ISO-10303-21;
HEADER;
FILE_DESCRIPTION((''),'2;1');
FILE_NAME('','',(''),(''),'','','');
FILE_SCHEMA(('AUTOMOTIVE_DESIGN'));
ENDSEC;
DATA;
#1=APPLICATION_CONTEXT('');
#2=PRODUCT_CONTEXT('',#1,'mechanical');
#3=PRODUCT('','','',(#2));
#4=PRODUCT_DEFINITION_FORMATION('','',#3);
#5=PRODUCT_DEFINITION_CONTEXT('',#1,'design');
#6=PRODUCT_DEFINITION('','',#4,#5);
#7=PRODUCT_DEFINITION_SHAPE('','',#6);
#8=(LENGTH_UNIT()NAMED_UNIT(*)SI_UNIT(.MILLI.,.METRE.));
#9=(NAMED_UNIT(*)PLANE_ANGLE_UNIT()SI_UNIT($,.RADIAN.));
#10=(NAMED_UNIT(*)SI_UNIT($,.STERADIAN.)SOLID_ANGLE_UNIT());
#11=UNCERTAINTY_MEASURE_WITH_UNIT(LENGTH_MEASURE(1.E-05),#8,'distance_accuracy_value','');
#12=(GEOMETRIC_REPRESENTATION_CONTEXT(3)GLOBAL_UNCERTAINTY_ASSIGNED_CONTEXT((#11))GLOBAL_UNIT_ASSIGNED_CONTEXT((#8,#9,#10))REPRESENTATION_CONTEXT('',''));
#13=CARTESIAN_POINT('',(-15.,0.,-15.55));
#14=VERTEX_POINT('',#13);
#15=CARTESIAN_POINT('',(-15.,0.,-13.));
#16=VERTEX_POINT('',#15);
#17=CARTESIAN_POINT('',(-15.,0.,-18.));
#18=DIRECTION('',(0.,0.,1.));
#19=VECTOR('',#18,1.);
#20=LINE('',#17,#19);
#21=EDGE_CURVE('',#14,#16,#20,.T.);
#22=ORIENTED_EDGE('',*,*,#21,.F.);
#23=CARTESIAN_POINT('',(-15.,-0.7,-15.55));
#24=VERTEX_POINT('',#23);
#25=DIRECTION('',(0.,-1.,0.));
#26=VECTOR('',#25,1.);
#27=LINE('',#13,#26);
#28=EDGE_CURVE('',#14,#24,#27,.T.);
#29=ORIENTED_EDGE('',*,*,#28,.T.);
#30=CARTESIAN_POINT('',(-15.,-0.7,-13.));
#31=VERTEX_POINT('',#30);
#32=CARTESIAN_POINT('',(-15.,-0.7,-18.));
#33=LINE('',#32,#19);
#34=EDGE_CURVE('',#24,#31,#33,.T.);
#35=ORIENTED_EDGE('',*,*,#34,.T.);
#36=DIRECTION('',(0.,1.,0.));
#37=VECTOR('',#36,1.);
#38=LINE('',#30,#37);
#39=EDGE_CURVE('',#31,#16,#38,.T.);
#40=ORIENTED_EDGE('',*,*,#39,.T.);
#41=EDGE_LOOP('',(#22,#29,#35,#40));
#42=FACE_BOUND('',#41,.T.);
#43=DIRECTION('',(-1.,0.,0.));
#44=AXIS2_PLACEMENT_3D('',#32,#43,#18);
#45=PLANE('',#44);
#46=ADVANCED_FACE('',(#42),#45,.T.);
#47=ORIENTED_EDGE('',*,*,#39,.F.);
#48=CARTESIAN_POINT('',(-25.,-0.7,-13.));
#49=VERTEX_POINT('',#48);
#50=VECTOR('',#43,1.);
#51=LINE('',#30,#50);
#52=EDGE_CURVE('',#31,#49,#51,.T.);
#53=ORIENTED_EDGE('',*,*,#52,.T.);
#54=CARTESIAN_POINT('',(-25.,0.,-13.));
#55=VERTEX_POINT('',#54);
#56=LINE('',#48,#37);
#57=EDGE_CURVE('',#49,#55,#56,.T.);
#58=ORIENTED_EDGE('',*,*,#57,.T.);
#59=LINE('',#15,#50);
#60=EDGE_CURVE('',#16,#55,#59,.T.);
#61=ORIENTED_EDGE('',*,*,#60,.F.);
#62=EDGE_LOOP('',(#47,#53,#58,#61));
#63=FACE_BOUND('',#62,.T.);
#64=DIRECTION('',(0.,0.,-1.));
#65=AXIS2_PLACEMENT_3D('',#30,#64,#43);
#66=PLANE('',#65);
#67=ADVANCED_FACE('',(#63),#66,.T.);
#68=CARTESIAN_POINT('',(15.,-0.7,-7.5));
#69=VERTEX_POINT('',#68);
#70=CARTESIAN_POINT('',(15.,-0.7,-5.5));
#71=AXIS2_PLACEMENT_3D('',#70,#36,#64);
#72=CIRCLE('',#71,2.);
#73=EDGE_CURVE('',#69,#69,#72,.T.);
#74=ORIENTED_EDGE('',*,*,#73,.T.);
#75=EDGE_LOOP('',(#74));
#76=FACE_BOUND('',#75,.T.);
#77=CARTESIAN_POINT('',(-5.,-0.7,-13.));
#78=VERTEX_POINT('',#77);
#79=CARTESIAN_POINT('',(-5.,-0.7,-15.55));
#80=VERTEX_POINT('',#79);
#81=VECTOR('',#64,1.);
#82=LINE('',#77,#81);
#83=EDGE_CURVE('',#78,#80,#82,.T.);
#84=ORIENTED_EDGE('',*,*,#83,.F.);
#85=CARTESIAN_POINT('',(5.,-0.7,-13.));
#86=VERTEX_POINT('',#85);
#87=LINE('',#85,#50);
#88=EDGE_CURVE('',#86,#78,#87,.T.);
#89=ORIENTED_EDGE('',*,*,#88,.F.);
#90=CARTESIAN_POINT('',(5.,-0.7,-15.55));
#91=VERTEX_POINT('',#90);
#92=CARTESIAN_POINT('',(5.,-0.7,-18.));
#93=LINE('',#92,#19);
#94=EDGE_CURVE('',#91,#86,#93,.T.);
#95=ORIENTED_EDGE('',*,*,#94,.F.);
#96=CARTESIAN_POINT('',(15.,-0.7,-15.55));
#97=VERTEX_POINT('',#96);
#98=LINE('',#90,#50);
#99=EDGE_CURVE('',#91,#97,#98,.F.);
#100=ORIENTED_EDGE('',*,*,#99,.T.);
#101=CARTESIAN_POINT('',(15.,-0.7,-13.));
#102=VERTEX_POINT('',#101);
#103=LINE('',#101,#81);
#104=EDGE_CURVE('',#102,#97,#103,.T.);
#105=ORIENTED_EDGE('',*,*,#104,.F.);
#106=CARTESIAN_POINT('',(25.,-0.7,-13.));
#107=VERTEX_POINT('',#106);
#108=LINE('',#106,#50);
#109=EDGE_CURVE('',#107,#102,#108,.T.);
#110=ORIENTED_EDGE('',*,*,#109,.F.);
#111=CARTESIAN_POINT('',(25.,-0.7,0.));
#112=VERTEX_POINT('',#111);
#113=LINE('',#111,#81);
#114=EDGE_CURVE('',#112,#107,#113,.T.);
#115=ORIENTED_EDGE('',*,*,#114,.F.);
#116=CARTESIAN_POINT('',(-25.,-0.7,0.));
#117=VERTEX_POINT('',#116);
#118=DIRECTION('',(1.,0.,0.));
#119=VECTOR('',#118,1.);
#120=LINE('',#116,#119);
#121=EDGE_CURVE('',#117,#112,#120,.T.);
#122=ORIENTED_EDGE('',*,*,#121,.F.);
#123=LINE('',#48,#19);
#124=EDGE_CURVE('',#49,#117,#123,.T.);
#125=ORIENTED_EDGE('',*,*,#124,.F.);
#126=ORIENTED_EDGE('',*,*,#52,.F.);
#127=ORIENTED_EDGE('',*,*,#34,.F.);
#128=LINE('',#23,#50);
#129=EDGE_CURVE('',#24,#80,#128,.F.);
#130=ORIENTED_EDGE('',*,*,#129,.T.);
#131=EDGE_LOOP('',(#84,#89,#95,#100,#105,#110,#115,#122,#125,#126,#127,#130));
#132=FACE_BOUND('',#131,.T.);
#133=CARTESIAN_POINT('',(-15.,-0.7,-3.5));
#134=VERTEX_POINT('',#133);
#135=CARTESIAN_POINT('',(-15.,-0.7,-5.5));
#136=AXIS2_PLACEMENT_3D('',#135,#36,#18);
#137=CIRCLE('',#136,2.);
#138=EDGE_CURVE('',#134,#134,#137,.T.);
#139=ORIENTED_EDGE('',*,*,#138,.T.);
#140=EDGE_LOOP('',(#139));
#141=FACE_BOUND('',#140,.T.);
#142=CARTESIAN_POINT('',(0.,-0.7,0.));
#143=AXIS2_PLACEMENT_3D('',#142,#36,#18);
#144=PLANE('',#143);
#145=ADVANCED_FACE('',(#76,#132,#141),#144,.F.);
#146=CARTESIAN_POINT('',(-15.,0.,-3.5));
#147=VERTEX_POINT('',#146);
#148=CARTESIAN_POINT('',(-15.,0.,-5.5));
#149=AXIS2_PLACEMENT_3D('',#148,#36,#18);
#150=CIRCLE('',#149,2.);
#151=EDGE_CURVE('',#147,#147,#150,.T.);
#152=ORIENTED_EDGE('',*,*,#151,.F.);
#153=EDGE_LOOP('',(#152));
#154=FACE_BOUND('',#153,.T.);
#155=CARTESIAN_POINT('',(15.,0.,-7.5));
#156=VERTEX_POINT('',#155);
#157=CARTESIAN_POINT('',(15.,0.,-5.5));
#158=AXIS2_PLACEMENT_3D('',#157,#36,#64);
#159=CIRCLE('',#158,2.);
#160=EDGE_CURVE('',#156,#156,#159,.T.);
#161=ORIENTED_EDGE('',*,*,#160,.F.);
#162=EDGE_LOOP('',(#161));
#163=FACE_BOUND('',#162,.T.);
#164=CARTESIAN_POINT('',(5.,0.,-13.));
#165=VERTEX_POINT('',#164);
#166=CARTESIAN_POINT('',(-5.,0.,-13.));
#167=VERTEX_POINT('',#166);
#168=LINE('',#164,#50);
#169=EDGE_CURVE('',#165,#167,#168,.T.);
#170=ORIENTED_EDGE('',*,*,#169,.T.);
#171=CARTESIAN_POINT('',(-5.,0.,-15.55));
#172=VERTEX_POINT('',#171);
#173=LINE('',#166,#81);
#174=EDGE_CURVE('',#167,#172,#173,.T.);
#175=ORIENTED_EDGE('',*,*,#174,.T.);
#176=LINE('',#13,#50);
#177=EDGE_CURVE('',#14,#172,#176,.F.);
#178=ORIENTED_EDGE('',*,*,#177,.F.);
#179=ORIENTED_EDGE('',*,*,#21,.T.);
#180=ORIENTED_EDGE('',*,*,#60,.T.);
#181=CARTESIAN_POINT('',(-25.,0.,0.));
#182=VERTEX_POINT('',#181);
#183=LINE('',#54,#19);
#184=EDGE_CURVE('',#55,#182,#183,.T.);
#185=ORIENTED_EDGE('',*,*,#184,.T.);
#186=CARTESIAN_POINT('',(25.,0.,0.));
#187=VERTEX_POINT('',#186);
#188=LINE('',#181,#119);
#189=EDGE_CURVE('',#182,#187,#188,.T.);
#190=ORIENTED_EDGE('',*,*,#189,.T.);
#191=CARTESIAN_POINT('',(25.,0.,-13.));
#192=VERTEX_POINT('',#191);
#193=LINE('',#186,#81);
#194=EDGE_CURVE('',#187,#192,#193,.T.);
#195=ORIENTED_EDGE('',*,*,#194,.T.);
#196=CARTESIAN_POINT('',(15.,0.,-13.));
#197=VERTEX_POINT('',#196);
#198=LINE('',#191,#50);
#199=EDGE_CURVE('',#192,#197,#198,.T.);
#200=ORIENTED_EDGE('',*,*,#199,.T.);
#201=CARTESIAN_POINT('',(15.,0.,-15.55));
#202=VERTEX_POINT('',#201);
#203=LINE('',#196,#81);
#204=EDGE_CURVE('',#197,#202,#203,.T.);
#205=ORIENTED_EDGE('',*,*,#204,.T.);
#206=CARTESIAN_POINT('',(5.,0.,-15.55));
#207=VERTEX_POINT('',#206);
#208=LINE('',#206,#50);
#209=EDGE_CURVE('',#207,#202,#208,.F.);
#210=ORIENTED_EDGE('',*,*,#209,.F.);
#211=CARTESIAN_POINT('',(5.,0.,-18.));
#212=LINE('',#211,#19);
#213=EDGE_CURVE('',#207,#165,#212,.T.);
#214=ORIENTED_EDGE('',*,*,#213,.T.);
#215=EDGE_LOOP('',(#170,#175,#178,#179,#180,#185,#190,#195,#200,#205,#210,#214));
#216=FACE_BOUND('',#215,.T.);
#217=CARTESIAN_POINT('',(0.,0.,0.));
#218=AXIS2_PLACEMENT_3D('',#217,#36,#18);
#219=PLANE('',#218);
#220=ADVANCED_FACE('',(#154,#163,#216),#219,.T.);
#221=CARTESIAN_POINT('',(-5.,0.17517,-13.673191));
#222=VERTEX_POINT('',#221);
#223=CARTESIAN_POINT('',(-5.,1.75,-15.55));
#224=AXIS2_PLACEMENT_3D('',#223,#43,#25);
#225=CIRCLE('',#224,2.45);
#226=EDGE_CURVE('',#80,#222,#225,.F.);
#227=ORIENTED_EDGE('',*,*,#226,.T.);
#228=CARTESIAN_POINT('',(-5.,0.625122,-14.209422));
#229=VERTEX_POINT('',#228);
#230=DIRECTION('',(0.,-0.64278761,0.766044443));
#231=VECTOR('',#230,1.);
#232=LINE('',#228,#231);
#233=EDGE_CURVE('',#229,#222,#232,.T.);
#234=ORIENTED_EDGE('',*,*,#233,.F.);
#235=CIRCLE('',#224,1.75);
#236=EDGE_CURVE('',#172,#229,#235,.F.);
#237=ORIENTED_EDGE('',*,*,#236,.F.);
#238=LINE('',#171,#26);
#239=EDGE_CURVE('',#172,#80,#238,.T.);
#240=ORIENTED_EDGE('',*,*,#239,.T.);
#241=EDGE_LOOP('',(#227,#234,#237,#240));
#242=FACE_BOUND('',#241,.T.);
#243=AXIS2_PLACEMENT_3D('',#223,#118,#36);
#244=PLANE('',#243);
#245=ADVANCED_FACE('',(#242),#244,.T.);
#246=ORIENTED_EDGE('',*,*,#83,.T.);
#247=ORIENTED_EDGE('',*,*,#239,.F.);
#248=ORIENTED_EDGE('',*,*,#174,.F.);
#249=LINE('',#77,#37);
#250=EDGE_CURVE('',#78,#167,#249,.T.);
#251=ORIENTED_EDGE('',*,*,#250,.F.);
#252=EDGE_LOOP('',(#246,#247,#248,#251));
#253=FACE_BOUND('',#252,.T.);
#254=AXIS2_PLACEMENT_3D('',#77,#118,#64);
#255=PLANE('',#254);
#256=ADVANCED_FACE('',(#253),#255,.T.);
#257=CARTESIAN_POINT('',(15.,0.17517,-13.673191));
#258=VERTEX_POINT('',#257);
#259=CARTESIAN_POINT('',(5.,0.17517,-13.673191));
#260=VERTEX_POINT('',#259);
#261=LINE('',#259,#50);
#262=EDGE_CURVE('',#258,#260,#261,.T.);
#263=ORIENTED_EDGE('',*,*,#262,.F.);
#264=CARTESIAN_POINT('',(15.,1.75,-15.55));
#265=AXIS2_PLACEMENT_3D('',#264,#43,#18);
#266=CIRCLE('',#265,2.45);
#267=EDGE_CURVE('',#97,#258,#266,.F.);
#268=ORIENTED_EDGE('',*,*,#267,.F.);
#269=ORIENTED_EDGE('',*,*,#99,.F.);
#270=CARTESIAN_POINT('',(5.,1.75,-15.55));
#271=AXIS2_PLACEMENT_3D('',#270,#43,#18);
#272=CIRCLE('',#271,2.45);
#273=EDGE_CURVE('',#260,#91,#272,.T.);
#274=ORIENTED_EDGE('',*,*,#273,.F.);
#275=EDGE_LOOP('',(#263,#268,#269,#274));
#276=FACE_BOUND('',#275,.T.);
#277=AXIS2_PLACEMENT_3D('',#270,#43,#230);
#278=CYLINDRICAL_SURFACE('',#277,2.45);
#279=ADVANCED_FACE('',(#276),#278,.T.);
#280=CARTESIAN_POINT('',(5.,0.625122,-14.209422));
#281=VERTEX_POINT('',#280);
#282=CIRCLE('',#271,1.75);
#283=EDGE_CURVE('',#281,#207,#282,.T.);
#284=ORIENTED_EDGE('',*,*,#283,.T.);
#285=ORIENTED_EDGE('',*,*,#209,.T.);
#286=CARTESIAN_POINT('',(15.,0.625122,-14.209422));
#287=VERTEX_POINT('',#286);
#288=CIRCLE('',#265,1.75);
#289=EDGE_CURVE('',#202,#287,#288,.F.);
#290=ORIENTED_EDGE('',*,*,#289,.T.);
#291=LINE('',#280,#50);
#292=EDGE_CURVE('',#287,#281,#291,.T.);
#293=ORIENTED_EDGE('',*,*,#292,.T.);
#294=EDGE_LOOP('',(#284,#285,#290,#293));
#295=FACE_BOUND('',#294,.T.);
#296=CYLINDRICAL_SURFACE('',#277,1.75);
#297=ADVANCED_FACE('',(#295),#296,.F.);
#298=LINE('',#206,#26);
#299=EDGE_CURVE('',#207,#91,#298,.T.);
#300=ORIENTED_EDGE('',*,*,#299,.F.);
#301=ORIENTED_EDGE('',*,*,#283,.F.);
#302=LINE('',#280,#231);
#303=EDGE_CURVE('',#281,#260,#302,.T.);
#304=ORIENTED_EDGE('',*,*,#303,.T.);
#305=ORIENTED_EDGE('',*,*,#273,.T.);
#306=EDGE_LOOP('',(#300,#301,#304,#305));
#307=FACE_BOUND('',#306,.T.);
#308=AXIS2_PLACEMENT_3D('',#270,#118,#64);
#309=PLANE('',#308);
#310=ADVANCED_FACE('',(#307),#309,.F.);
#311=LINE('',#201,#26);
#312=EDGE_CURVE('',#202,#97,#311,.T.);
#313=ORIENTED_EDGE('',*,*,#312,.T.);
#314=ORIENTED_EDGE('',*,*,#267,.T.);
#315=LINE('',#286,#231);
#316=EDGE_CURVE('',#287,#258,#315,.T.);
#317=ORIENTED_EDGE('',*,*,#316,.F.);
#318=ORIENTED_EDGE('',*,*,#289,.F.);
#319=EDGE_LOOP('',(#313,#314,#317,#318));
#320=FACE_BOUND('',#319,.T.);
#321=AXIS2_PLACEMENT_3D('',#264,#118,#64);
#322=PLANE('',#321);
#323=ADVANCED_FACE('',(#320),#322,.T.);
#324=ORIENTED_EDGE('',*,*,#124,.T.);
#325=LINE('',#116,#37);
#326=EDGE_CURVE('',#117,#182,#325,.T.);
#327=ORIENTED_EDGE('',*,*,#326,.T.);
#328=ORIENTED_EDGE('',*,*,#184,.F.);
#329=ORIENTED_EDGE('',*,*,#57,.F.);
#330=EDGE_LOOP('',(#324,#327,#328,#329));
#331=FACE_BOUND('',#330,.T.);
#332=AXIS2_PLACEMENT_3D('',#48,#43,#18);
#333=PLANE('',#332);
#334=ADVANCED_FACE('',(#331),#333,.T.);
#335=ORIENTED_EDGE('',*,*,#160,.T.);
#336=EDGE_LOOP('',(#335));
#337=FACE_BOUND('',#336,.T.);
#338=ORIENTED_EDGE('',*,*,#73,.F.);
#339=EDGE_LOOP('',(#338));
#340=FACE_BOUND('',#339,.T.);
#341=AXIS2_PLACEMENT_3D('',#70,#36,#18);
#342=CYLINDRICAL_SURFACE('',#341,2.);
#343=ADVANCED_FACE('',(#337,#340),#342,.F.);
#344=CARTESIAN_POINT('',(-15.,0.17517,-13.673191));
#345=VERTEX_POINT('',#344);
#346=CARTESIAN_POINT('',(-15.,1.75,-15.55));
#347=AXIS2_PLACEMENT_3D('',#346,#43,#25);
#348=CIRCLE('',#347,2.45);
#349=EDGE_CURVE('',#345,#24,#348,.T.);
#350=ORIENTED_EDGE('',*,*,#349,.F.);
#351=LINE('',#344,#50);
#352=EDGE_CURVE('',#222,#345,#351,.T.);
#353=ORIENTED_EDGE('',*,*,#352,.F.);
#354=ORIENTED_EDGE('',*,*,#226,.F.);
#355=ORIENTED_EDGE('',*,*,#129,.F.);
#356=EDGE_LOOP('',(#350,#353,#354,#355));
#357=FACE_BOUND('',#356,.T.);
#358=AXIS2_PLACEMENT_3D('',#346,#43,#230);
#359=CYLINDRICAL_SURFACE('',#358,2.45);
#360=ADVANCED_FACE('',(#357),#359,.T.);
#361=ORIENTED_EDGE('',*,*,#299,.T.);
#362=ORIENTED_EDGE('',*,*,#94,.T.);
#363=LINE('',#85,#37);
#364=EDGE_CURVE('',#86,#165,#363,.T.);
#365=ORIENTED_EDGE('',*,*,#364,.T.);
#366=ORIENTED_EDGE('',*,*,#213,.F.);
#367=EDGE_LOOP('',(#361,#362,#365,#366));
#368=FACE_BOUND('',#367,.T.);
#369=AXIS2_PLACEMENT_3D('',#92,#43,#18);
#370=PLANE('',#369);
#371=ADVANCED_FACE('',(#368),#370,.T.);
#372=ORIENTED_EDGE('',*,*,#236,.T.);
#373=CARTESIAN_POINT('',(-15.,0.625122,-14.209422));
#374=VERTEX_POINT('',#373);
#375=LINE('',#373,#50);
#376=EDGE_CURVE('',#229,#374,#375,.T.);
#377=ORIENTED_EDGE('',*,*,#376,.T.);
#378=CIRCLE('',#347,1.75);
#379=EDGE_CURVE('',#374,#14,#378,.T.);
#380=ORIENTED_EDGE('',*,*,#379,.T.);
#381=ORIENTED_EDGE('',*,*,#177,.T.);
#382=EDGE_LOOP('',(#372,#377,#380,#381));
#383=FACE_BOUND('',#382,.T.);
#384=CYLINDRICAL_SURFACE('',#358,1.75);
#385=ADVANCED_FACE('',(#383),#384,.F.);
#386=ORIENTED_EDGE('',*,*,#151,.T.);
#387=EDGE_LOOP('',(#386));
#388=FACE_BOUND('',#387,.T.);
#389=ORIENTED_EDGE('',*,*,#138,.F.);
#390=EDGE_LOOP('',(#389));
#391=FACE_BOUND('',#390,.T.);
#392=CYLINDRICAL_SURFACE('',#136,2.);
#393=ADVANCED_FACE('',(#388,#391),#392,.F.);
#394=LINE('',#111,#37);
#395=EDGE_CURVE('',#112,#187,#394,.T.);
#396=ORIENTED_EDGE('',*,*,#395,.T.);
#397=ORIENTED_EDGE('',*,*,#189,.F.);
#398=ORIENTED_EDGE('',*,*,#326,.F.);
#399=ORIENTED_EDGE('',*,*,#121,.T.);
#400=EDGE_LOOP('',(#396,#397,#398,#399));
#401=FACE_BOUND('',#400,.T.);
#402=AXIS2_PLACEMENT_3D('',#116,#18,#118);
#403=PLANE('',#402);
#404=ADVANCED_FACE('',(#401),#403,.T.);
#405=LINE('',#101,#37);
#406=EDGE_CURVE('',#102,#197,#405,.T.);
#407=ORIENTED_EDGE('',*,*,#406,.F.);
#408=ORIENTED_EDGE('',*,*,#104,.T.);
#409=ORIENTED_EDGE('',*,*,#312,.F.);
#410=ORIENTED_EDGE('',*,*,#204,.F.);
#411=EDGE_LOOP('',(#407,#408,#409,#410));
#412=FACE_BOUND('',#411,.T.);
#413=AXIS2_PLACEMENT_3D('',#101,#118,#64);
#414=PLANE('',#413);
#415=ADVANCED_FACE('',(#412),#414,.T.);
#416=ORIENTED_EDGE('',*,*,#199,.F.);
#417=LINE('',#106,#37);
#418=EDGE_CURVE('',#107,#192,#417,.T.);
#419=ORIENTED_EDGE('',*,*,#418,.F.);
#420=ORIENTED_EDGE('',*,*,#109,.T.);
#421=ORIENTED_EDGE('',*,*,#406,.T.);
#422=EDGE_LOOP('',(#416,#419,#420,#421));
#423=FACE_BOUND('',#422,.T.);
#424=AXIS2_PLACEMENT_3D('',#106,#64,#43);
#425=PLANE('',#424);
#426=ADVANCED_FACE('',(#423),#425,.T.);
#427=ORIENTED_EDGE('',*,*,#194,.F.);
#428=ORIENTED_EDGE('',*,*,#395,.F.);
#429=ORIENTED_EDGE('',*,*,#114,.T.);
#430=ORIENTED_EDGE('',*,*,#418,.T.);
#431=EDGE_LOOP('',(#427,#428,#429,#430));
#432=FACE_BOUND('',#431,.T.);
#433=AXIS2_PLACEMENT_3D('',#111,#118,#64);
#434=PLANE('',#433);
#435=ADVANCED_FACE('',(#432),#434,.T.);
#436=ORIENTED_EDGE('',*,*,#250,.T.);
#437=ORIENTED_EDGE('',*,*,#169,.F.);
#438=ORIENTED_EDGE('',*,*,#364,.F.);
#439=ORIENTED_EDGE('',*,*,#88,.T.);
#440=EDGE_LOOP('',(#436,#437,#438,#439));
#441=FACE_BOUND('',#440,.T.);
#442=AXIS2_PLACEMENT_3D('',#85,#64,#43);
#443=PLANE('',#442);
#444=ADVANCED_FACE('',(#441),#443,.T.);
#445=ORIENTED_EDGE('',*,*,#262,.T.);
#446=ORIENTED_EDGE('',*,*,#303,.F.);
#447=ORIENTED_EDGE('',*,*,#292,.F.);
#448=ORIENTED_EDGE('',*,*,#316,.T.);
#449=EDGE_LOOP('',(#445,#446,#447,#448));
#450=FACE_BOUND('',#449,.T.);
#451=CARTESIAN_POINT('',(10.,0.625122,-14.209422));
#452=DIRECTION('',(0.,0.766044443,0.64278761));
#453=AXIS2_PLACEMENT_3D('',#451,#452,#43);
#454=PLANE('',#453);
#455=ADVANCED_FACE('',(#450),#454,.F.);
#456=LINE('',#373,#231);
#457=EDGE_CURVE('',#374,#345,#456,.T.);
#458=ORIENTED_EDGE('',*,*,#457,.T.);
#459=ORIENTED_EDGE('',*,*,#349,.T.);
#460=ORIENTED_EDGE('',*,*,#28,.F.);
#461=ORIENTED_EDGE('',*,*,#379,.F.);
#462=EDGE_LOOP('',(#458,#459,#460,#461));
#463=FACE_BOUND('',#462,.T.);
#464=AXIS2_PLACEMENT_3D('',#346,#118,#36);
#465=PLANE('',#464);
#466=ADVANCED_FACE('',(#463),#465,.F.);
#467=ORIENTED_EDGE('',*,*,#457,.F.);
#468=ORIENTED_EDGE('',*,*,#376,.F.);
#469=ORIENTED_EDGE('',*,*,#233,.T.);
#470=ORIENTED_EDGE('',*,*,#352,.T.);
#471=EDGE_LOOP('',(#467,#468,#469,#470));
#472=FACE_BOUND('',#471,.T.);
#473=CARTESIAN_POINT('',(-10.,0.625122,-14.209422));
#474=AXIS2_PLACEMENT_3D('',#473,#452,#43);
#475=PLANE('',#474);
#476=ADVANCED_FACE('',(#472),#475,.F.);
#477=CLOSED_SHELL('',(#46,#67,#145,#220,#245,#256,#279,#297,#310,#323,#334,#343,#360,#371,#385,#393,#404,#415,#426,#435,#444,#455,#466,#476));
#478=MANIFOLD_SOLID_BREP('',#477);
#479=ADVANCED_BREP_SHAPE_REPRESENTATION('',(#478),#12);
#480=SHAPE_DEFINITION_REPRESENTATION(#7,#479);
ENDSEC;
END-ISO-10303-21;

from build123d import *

# Parameters (mm, degrees)
SKETCH_1_R             = 2
SM_BASE_FLANGE_1_DEPTH = 0.7
OTHER_START            = -15
OTHER_2_DEPTH          = 30
OTHER_2_2_DEPTH        = 10
OTHER_START_2          = 5
OTHER_2_3_DEPTH        = 10


# Read off the part's stored shape, not the designer's step: 褶边2
# Sheet-metal steps are written as plain solids
with BuildPart() as part:
    # Sketch 1 → 基体-法兰1 (new body)
    with BuildSketch(Plane(origin=(0, 0, 0), x_dir=(1, 0, 0), z_dir=(0, 1, 0))):
        Polygon((-25, 0), (25, 0), (25, 13), (15, 13), (15, 18), (5, 18), (5, 13), (-5, 13), (-5, 18), (-15, 18), (-15, 13), (-25, 13), align=None)
        with Locations(Location((-15, 5.5, 0), (0, 0, 270))):
            Circle(SKETCH_1_R, mode=Mode.SUBTRACT)
        with Locations(Location((15, 5.5, 0), (0, 0, 90))):
            Circle(SKETCH_1_R, mode=Mode.SUBTRACT)
    extrude(amount=-SM_BASE_FLANGE_1_DEPTH)

    # Other 2 outline → Other 2 (cut)
    with BuildSketch(Plane.YZ.offset(OTHER_START)):
        with BuildLine():
            Line((0, -18), (0, -17.264642819))
            ThreePointArc((0, -17.264642819), (-0.518259244, -16.476012959), (-0.7, -15.55))
            Line((-0.7, -15.55), (-0.7, -18))
            Line((-0.7, -18), (0, -18))
        make_face()
    extrude(amount=OTHER_2_DEPTH, mode=Mode.SUBTRACT)

    # Other 2 2 outline → Other 2 2 (add)
    with BuildSketch(Plane.YZ.offset(OTHER_START)):
        with BuildLine():
            Line((0.175170356, -13.673191114), (0.625121683, -14.209422225))
            ThreePointArc((0.625121683, -14.209422225), (3.336038627, -16.289581958), (0, -15.55))
            Line((0, -15.55), (0, -17.264642819))
            ThreePointArc((0, -17.264642819), (4.197091003, -15.669355023), (0.175170356, -13.673191114))
        make_face()
    extrude(amount=OTHER_2_2_DEPTH)

    # Other 2 3 outline → Other 2 3 (add)
    with BuildSketch(Plane.YZ.offset(OTHER_START_2)):
        with BuildLine():
            Line((0.175170356, -13.673191114), (0.625121683, -14.209422225))
            ThreePointArc((0.625121683, -14.209422225), (3.336038627, -16.289581958), (0, -15.55))
            Line((0, -15.55), (0, -17.264642819))
            ThreePointArc((0, -17.264642819), (4.197091003, -15.669355023), (0.175170356, -13.673191114))
        make_face()
    extrude(amount=OTHER_2_3_DEPTH)


solid = part.part
